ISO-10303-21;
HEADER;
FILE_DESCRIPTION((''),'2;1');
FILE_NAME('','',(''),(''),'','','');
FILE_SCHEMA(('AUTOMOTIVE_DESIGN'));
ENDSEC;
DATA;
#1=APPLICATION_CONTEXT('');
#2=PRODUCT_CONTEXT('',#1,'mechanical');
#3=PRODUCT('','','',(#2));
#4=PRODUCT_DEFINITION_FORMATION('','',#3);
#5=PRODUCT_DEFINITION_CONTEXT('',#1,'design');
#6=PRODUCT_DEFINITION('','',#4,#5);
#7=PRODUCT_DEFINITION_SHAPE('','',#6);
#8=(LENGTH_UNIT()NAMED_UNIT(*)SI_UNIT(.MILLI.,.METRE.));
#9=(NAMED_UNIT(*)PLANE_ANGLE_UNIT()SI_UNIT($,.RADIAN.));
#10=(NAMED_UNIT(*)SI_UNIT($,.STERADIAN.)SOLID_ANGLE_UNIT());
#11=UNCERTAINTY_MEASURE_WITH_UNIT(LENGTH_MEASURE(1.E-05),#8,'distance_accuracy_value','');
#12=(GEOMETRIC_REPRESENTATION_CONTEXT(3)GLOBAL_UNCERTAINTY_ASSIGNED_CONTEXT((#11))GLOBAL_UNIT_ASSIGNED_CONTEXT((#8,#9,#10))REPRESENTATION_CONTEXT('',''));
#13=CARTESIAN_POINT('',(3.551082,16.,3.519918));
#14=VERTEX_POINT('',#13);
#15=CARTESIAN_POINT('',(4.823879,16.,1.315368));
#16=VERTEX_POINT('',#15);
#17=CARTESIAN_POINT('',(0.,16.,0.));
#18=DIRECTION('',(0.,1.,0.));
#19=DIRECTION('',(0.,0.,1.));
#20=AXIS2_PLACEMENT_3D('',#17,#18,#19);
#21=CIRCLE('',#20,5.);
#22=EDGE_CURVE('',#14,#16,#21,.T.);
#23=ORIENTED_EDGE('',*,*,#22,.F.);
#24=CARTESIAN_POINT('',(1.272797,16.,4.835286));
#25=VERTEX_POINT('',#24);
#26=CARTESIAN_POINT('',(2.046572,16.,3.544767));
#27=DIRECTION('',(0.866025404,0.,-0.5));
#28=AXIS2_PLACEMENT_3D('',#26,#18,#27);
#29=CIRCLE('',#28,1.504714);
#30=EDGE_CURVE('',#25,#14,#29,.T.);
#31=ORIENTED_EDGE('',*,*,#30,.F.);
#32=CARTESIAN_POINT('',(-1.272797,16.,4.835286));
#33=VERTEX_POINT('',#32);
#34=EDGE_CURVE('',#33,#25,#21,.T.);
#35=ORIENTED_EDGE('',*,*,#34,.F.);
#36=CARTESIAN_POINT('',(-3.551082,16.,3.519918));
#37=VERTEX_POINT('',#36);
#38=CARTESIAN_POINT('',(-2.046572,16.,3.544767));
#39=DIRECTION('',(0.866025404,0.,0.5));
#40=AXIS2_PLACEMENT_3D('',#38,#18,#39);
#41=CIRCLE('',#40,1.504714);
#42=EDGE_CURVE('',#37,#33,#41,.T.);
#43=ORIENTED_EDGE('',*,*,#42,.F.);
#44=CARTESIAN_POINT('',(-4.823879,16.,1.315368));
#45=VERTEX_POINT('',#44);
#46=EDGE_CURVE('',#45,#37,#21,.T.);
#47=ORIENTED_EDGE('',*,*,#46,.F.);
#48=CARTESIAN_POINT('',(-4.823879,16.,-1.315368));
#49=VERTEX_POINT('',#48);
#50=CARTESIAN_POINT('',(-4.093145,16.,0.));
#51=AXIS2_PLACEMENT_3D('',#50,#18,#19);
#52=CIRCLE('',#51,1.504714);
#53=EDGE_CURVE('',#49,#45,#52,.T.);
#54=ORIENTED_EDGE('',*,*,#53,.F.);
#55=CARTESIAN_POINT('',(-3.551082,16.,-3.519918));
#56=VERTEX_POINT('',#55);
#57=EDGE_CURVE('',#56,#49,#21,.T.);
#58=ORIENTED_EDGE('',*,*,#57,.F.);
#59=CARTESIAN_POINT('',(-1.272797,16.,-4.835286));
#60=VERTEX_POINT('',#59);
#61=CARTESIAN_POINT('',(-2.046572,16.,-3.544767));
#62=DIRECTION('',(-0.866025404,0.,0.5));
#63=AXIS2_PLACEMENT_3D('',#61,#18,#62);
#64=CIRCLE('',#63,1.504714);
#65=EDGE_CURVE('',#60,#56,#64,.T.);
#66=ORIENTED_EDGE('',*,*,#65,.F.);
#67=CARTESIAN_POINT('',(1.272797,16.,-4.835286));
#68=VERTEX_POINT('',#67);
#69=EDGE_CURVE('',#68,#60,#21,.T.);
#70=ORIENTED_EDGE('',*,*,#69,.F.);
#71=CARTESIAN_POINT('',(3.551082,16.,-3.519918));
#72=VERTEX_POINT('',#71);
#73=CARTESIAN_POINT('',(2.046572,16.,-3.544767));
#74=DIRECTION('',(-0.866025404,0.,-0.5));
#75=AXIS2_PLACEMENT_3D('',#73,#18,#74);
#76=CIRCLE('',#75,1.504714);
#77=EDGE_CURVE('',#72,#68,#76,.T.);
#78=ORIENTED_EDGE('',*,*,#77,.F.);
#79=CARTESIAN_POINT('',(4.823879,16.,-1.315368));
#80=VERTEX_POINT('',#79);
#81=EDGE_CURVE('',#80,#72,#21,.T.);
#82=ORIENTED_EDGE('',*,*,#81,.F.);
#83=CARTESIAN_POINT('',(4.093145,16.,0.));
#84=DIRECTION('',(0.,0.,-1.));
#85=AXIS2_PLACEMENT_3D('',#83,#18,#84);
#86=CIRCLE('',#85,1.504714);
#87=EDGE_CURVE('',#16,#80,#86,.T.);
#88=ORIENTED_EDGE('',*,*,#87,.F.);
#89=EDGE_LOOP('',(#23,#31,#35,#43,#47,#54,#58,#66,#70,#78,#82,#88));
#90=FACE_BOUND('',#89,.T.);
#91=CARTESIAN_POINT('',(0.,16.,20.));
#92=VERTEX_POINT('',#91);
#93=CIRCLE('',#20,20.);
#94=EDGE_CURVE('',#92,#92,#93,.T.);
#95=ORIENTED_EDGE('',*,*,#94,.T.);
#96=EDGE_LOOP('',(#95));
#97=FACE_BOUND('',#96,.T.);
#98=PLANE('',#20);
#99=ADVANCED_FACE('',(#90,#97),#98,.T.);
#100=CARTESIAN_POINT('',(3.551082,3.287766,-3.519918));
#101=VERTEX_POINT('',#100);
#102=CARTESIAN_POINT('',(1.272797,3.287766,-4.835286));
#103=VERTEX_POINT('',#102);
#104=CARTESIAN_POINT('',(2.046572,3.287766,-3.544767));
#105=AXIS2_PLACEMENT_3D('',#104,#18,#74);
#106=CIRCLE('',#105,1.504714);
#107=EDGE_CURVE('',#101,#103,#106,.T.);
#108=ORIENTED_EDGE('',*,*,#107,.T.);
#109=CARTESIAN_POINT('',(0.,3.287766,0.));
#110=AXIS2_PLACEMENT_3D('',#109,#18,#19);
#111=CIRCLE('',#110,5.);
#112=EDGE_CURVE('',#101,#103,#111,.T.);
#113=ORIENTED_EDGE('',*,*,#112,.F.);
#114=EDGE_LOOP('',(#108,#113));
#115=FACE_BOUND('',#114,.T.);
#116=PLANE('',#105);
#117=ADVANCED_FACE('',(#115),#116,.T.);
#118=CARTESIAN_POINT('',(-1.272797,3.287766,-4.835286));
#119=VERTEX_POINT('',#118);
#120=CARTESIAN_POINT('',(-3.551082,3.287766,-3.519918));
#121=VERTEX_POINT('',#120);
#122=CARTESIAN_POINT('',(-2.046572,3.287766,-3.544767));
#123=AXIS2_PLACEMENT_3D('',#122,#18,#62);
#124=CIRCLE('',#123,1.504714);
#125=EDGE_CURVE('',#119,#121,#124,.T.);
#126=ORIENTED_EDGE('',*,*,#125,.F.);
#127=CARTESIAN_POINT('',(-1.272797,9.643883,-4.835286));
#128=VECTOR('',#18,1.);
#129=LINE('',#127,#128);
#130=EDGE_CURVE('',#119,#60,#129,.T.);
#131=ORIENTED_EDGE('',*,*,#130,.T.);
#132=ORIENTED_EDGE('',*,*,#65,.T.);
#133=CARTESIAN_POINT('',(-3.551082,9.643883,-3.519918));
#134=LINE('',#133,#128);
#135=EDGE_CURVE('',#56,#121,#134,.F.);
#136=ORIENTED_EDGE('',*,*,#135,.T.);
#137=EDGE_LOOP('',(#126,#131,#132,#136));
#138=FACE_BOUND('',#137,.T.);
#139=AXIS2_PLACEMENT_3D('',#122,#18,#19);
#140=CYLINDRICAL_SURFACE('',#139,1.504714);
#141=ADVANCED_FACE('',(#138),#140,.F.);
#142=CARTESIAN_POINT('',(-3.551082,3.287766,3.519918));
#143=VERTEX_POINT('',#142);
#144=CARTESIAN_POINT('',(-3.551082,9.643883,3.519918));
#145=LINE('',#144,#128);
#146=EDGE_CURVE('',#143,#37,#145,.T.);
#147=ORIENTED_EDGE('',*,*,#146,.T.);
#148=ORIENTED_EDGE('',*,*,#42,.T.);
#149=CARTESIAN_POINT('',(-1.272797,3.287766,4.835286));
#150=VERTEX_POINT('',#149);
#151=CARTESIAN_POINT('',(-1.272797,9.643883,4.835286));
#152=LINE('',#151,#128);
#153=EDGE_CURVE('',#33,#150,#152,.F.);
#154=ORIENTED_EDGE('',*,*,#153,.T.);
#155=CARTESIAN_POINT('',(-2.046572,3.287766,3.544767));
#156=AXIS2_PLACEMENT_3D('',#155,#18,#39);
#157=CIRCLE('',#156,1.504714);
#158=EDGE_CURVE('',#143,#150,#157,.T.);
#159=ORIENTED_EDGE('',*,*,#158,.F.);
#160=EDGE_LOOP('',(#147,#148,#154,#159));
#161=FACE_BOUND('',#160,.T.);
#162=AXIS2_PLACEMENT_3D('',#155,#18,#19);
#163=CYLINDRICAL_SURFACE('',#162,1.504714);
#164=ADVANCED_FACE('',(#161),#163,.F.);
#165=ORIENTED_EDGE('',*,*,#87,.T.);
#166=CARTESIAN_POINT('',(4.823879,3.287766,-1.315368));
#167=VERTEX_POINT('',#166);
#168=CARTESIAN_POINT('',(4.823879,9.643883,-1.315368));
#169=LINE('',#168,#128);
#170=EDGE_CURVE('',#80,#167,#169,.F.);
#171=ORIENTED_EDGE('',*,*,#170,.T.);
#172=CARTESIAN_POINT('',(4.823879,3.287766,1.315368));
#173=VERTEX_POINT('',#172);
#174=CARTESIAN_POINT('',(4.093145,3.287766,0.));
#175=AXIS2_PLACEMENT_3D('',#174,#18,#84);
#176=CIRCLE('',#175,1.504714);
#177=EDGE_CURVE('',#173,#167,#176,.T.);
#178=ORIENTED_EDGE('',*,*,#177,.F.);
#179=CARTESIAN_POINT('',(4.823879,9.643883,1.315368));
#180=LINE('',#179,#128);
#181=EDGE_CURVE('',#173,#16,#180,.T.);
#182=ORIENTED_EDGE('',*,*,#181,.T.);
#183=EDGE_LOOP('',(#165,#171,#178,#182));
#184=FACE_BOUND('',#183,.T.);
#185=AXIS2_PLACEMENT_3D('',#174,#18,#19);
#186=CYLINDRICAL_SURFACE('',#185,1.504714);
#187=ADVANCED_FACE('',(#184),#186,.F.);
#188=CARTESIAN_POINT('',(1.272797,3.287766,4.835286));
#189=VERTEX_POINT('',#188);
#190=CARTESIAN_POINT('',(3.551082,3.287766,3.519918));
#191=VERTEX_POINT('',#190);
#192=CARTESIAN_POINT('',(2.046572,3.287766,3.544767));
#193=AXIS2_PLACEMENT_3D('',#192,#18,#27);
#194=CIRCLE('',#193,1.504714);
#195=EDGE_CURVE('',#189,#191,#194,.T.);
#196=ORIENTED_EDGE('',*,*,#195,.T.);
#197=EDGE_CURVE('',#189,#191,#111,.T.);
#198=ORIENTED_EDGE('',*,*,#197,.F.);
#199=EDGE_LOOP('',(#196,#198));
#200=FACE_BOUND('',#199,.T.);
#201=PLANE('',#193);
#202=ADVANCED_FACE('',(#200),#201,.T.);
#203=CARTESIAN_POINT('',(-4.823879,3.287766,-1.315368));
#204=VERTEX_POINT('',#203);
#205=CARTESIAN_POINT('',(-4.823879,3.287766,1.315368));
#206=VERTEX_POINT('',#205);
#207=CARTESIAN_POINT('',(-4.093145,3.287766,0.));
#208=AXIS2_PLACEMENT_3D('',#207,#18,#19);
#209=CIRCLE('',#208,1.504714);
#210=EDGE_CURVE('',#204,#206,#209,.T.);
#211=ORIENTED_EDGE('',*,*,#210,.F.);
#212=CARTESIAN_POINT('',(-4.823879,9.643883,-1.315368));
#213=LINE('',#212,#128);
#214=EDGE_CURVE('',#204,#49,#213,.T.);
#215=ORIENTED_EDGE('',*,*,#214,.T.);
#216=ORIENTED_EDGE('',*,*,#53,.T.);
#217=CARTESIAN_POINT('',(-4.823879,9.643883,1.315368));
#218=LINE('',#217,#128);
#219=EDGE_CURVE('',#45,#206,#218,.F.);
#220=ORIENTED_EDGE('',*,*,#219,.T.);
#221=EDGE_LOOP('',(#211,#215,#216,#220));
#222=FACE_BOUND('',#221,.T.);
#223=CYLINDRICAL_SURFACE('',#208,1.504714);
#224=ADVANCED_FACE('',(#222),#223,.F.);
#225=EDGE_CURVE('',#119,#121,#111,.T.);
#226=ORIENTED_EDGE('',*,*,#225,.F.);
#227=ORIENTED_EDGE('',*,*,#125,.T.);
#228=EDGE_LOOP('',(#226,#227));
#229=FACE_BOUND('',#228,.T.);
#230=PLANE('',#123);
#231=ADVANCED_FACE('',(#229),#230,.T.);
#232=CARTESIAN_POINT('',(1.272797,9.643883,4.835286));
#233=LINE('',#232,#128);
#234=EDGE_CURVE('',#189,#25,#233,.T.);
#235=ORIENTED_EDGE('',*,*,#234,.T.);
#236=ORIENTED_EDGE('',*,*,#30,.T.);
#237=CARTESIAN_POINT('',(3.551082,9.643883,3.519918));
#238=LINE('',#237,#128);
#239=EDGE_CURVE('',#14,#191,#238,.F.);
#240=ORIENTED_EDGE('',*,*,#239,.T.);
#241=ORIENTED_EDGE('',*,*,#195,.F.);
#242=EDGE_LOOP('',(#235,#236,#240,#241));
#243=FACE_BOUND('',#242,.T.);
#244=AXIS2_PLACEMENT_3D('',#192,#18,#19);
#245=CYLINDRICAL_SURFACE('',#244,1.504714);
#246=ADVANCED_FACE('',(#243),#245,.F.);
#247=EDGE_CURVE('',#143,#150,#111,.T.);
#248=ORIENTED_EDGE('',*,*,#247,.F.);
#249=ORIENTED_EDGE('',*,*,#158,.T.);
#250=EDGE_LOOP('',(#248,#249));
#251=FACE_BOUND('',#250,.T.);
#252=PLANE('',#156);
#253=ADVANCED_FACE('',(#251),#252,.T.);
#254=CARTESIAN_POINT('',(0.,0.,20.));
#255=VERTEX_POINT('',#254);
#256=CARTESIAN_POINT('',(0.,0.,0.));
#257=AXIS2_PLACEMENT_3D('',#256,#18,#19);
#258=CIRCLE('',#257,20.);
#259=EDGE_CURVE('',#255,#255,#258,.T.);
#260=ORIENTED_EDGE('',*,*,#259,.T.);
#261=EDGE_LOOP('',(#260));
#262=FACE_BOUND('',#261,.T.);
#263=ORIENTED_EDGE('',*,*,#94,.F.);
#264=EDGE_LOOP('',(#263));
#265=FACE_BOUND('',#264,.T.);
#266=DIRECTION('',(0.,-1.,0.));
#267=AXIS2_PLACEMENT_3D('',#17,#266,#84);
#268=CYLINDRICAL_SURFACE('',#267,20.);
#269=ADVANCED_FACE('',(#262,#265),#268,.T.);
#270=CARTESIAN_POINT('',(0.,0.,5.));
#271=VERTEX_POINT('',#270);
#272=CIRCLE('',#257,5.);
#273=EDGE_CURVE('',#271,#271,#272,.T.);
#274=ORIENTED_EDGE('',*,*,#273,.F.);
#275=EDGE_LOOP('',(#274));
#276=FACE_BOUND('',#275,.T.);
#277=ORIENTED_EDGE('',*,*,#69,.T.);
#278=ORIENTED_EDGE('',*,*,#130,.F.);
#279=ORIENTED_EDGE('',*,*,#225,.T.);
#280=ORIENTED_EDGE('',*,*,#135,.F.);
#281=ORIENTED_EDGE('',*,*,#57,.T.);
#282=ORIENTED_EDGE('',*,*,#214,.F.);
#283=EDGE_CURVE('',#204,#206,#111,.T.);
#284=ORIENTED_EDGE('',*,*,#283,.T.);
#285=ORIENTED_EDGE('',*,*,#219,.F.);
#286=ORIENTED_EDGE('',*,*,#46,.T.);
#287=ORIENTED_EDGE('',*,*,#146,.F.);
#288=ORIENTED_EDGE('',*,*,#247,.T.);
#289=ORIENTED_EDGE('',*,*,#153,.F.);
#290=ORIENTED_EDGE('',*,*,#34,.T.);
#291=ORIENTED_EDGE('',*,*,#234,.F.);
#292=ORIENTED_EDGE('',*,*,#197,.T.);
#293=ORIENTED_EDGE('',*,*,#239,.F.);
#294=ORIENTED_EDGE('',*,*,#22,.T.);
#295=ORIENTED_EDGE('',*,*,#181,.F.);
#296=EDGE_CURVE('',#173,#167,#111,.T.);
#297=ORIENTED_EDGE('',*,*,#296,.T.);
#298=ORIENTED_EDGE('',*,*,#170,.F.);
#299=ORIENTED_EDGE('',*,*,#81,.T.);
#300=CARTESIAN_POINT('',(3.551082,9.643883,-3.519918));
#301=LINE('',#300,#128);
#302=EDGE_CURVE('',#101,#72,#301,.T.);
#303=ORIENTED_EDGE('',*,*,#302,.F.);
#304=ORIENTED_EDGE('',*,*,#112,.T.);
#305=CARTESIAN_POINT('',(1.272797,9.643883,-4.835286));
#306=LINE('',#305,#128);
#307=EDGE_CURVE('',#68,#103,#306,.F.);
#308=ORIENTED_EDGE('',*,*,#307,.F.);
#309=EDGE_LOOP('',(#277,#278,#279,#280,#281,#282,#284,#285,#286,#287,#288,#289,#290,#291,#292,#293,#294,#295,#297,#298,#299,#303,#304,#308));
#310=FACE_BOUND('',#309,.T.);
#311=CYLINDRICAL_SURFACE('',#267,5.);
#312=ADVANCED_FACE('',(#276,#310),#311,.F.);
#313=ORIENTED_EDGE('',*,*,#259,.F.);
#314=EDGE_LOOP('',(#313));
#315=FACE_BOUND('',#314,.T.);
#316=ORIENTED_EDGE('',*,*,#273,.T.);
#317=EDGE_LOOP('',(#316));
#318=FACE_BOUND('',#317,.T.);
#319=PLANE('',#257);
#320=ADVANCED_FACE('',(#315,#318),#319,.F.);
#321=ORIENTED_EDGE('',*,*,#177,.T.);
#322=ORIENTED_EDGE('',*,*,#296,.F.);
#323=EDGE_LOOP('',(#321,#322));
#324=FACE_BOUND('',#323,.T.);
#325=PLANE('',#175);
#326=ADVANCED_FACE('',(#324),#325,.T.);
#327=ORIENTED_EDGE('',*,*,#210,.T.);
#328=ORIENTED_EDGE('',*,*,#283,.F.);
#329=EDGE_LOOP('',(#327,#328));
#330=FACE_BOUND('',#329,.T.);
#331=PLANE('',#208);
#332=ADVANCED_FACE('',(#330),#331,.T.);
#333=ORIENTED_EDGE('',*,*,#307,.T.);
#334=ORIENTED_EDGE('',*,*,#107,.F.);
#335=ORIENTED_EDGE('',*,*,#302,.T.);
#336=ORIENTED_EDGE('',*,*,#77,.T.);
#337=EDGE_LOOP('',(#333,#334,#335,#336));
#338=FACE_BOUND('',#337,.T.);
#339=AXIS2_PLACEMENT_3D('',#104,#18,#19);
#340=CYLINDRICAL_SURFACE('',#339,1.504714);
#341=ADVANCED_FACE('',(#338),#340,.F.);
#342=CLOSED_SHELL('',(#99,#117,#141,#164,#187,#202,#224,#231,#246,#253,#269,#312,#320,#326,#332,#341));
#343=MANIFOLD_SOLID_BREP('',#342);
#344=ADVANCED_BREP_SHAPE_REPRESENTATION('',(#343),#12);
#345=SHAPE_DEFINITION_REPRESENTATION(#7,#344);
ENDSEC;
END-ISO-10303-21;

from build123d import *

# Parameters (mm, degrees)
SKETCH1_R           = 20
BOSS_EXTRUDE1_DEPTH = 16
SKETCH2_R           = 5
CUT_EXTRUDE1_DEPTH  = 33.496153619
SKETCH3_R           = 1.504714463
CUT_EXTRUDE2_DEPTH  = 12.712234161
CIRPATTERN1_COUNT   = 6


with BuildPart() as part:
    # Sketch1 → Boss-Extrude1 (new body)
    with BuildSketch(Plane(origin=(0, 0, 0), x_dir=(1, 0, 0), z_dir=(0, 1, 0))):
        Circle(SKETCH1_R)
    extrude(amount=BOSS_EXTRUDE1_DEPTH)

    # Sketch2 → Cut-Extrude1 (cut, through all)
    with BuildSketch(Plane(origin=(0, 0, 0), x_dir=(1, 0, 0), z_dir=(0, 1, 0))):
        Circle(SKETCH2_R)
    extrude(amount=CUT_EXTRUDE1_DEPTH, mode=Mode.SUBTRACT)

    # Sketch3 → Cut-Extrude2 (cut)
    with BuildSketch(Plane(origin=(0, 16, 0), x_dir=(1, 0, 0), z_dir=(0, 1, 0))):
        with Locations((-4.093144625, 0)):
            Circle(SKETCH3_R)
    cut_extrude2 = extrude(amount=-CUT_EXTRUDE2_DEPTH, mode=Mode.SUBTRACT)

    # CirPattern1: Cut-Extrude2 ×6 about axis
    cirpattern1_axis = Axis((0, 0, 0), (0, 1, 0))
    for i in range(1, CIRPATTERN1_COUNT):
        add(cut_extrude2.rotate(cirpattern1_axis, i * 360 / CIRPATTERN1_COUNT), mode=Mode.SUBTRACT)


solid = part.part
